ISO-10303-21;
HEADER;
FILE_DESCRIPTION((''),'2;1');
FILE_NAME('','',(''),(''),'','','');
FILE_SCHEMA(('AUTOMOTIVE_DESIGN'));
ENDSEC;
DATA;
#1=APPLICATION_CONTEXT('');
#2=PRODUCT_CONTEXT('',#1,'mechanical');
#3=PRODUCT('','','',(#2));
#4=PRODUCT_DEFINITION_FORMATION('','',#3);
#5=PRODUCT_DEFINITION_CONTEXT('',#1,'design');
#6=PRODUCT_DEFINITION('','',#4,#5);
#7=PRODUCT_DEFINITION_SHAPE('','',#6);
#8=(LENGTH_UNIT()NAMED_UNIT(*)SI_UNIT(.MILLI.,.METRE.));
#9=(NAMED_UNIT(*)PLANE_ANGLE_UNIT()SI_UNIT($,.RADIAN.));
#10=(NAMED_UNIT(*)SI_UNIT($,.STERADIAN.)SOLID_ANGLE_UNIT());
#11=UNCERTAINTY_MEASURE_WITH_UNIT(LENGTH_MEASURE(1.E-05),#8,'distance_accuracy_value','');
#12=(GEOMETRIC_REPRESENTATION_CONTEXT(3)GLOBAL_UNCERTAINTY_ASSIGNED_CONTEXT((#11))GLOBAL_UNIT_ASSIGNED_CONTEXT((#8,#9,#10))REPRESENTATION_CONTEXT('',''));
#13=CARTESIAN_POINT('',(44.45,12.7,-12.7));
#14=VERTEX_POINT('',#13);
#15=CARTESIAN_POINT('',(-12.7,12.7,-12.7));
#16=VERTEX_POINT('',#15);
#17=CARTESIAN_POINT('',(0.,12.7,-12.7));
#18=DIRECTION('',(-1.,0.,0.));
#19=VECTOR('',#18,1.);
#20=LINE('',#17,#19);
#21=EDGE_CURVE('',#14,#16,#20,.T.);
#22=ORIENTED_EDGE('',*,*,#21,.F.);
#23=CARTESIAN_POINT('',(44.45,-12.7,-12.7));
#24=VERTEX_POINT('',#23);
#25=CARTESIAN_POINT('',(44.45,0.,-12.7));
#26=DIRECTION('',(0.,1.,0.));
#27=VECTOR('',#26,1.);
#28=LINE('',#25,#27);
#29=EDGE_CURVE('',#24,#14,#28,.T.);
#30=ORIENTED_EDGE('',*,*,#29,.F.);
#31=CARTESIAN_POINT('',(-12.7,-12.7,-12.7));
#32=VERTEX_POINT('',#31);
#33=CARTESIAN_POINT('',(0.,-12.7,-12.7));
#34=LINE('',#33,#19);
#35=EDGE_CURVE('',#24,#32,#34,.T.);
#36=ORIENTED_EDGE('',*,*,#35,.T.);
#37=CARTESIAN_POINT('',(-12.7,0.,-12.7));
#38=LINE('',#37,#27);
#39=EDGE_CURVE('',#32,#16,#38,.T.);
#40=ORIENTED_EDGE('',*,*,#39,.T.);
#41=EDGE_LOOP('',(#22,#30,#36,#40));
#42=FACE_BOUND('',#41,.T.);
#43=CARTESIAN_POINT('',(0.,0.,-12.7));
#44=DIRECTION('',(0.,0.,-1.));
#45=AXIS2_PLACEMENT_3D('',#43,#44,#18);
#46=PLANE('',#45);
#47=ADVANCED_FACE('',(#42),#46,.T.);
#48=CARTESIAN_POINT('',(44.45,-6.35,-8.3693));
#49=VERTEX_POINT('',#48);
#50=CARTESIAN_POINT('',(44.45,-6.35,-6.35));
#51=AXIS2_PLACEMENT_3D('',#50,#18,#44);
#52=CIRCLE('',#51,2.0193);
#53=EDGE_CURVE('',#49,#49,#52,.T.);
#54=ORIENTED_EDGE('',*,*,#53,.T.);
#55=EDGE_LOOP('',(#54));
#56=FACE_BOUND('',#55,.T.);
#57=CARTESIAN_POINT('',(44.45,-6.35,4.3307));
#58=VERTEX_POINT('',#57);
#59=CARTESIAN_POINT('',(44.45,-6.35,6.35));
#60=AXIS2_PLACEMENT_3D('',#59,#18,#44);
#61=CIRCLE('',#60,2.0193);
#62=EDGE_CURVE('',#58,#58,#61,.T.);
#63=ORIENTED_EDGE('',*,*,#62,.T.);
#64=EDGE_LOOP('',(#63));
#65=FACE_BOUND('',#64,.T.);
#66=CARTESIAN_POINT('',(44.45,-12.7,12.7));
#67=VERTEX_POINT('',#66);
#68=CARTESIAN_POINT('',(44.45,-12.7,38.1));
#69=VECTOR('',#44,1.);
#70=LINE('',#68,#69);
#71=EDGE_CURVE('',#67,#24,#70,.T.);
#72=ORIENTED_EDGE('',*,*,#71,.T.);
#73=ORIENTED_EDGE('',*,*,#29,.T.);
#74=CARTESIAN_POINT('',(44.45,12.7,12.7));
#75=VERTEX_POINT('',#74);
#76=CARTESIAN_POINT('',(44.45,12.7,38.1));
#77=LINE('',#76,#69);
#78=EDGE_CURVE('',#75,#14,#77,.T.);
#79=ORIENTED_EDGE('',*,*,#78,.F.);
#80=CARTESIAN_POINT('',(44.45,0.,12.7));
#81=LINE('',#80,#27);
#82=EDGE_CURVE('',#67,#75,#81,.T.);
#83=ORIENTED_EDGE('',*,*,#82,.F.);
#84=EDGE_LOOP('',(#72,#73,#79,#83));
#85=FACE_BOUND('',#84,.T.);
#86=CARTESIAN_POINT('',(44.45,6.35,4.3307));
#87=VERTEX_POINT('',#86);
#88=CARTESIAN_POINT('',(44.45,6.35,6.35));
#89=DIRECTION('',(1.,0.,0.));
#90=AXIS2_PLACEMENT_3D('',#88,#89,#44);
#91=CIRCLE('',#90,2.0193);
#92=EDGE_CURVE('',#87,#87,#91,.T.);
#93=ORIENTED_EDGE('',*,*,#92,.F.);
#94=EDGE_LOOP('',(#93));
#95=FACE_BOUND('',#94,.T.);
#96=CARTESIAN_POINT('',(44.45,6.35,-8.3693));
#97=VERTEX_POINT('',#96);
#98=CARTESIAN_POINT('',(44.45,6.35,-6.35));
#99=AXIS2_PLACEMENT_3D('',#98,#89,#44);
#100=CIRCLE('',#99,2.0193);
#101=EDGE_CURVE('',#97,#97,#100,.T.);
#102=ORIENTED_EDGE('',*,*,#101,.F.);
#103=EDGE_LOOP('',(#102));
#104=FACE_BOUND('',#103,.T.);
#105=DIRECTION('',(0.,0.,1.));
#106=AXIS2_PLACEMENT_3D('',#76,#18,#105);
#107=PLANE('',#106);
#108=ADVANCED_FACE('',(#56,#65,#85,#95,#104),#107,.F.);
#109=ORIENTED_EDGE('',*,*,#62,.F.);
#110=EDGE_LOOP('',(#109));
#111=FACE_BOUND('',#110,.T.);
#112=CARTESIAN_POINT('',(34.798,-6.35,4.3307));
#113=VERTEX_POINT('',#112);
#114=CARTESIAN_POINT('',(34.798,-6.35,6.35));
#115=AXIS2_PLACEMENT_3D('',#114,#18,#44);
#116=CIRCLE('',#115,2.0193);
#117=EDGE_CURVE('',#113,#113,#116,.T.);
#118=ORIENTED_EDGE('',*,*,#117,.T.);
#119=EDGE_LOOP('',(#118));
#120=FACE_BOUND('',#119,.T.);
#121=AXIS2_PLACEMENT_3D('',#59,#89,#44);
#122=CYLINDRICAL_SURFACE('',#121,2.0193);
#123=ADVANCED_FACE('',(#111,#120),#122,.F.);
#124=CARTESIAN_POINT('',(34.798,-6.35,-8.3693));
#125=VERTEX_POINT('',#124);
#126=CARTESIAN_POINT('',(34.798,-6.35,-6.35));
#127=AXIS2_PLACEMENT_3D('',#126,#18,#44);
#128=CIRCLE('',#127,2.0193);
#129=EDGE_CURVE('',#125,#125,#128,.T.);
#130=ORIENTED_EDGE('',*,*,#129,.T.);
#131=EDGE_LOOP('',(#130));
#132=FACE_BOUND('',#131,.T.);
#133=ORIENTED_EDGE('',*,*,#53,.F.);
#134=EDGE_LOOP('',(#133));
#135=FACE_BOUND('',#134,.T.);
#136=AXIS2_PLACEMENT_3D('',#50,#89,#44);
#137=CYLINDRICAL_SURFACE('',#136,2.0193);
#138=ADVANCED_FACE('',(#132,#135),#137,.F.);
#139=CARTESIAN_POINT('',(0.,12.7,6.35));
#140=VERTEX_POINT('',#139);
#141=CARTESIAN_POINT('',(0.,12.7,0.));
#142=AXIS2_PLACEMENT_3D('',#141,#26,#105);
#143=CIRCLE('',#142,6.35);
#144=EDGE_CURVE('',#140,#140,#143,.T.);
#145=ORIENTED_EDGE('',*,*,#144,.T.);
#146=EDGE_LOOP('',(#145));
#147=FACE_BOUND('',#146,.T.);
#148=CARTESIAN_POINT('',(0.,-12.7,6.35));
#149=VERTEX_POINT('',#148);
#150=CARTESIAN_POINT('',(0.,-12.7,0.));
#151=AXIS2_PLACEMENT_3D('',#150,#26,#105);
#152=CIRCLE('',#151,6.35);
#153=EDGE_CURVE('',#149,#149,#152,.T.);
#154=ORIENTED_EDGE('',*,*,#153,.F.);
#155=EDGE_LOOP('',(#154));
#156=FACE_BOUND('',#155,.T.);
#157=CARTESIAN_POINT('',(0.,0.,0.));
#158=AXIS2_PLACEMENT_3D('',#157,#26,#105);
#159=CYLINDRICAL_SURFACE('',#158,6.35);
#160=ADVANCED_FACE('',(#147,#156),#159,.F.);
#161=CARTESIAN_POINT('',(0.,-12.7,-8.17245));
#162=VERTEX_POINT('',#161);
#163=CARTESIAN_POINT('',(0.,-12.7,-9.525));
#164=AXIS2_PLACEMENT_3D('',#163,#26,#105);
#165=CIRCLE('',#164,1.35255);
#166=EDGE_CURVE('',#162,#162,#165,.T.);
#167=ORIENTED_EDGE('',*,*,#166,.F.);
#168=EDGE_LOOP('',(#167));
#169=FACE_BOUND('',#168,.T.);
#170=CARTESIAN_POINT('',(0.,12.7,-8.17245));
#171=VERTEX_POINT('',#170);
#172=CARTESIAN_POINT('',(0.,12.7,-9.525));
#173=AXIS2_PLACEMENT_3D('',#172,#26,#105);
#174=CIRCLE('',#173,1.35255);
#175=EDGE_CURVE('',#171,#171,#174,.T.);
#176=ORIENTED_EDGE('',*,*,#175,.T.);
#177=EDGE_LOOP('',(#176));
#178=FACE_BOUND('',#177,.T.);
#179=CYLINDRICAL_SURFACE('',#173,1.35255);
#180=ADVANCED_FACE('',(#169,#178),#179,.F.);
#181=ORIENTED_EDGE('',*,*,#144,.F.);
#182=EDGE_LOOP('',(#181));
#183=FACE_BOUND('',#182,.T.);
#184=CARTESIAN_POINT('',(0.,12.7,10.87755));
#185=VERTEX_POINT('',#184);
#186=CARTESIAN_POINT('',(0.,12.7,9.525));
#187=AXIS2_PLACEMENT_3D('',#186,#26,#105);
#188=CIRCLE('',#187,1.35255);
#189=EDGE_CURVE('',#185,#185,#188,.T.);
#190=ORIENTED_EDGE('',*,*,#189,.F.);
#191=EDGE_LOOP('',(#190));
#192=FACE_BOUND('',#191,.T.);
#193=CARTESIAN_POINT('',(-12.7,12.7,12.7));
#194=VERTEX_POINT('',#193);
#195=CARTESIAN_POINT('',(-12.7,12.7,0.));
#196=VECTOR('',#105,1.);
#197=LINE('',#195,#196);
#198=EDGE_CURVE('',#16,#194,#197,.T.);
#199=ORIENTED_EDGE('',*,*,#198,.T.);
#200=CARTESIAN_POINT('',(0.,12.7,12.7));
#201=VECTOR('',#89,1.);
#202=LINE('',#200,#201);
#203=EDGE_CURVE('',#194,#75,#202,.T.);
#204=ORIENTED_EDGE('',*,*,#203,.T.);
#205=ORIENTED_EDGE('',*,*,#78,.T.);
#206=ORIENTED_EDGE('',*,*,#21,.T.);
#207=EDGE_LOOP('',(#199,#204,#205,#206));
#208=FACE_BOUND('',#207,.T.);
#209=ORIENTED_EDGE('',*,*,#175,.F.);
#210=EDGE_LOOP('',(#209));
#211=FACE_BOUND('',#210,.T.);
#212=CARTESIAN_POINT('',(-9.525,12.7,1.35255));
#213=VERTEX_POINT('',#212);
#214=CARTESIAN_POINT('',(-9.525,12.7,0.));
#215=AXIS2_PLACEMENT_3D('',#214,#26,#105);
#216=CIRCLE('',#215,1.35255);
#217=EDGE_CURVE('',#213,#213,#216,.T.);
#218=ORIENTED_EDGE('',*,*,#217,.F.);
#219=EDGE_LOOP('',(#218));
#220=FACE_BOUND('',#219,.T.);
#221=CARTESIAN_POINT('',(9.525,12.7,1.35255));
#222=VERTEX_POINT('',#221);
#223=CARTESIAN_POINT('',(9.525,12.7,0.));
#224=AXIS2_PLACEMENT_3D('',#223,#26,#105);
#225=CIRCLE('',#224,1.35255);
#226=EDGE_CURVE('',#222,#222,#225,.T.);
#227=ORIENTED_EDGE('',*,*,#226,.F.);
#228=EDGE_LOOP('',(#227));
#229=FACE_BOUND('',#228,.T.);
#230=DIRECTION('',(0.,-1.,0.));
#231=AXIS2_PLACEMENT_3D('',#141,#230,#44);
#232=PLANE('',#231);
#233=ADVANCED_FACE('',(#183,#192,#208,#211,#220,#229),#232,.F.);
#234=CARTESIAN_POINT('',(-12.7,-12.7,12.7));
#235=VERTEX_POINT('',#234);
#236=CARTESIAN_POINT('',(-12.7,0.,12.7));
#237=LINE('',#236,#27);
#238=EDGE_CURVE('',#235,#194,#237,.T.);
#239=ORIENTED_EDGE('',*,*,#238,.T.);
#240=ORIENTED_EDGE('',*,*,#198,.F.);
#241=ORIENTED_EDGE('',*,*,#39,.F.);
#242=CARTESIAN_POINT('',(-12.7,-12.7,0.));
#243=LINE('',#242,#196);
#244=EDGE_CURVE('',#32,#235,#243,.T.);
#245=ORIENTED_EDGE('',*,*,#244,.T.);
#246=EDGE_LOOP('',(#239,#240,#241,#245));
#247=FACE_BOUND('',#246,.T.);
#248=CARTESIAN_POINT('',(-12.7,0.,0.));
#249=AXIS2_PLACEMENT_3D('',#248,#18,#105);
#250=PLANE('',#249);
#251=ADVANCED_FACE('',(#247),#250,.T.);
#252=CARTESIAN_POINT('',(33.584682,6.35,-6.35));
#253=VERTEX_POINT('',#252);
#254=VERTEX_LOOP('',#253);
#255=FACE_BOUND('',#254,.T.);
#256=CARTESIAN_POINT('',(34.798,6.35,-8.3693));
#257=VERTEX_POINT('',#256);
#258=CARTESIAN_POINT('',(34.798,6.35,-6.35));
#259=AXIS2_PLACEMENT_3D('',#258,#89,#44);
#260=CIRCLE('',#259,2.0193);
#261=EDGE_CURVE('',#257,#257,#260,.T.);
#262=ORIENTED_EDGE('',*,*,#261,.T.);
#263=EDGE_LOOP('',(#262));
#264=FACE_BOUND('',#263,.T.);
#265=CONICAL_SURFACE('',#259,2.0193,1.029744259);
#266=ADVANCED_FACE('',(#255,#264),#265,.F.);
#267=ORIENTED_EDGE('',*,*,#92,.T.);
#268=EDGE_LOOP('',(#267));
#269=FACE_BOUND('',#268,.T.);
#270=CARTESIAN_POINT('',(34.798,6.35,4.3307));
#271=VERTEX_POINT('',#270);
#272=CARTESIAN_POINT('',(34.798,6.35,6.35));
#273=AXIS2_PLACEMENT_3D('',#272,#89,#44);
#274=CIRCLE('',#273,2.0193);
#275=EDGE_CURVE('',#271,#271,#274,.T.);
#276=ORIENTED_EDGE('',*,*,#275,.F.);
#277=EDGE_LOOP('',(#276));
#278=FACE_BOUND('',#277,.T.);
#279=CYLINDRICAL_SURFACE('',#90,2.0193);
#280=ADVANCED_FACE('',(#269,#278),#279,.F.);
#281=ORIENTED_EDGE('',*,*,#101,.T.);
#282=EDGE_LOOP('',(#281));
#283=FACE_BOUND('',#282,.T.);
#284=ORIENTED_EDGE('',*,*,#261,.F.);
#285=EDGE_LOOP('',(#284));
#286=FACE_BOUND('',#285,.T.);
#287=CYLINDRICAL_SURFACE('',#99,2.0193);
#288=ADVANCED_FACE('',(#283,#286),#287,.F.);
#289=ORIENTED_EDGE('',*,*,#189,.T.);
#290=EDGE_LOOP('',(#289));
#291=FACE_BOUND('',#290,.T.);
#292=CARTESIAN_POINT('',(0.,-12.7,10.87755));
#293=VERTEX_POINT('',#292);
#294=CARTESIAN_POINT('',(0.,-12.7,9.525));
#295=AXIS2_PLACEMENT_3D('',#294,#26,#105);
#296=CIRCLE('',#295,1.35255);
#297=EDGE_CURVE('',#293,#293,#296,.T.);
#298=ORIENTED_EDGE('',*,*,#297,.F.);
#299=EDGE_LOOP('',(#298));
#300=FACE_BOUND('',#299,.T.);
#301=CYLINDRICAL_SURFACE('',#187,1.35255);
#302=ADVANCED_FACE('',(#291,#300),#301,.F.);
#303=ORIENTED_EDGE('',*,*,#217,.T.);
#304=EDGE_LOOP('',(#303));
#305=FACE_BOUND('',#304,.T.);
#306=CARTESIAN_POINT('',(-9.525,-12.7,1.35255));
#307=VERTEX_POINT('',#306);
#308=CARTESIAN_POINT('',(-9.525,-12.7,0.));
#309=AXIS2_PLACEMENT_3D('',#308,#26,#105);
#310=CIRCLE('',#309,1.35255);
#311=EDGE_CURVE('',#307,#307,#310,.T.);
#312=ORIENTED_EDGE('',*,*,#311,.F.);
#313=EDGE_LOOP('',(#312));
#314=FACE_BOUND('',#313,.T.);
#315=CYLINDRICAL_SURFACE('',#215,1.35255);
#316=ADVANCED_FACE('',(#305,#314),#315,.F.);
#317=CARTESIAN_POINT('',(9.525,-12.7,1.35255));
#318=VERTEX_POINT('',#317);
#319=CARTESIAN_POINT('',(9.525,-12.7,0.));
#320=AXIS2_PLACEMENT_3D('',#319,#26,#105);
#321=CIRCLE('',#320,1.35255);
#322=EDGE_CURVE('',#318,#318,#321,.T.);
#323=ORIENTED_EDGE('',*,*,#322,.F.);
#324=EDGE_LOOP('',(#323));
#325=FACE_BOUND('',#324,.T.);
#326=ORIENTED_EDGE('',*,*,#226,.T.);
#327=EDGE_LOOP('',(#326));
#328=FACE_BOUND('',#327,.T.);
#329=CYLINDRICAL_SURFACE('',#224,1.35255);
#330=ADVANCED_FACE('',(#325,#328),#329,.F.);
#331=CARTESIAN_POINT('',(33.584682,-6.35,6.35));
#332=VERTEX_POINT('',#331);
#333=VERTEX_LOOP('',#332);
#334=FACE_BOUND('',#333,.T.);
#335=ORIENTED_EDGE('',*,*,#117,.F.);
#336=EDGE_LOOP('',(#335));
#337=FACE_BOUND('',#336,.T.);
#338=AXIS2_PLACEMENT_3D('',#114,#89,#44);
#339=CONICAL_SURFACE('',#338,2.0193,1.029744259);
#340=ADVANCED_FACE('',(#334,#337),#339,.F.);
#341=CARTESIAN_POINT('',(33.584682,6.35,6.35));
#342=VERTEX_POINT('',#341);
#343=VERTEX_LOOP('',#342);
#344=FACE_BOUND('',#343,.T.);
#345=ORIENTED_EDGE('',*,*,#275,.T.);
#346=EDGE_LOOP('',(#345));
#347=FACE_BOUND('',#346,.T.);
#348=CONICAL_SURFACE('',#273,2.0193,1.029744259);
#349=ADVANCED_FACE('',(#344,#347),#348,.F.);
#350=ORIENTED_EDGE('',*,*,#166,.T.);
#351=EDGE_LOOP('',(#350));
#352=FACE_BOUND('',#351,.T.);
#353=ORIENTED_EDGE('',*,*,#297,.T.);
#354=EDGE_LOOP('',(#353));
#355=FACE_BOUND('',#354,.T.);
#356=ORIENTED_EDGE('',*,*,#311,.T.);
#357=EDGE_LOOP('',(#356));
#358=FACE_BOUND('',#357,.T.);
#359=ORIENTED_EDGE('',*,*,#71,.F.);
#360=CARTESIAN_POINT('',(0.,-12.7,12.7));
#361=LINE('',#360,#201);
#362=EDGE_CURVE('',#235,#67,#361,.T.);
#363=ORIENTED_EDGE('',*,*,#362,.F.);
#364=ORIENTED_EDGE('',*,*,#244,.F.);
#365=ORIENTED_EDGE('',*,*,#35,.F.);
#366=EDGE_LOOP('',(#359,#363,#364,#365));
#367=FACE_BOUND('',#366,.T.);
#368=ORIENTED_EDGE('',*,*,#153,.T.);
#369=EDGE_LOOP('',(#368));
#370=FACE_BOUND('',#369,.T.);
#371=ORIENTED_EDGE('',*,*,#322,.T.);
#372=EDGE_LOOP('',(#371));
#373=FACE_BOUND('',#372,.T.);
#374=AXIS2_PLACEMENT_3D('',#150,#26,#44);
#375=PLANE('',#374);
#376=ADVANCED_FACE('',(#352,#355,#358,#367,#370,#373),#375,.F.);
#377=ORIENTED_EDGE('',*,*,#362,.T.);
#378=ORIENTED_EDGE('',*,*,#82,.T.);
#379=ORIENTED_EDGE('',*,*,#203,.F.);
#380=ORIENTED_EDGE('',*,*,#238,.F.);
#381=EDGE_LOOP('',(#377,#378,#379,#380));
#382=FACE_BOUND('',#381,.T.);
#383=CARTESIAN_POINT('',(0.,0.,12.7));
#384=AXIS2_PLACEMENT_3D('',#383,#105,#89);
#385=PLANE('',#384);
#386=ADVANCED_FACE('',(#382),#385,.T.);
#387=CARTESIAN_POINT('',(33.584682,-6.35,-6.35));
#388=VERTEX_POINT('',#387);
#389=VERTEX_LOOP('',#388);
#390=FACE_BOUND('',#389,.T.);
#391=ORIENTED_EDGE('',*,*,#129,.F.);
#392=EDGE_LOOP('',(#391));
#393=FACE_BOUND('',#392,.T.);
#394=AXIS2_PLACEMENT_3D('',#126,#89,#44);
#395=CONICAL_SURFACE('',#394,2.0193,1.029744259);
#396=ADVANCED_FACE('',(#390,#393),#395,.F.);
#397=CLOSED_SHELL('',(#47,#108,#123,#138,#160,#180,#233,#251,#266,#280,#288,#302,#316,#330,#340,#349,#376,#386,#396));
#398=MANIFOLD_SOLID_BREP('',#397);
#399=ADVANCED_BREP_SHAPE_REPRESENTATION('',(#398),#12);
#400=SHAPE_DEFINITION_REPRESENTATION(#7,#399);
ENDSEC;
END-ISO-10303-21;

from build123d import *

# Parameters (mm, degrees)
SKETCH1_W                  = 88.9
SKETCH1_H                  = 76.2
BOSS_EXTRUDE1_DEPTH        = 12.7
SKETCH9_R                  = 6.35
CUT_EXTRUDE2_DEPTH         = 60.905780189
FILLET1_R                  = 38.1
F_10_32_TAPPED_HOLE1_D     = 4.0386
F_10_32_TAPPED_HOLE1_DEPTH = 9.652
F_10_32_TAPPED_HOLE1_TIP   = 1.213317848
CUT_EXTRUDE3_DEPTH         = 60.905780189
F_6_32_TAPPED_HOLE1_D      = 2.7051
CIRPATTERN1_COUNT          = 4


with BuildPart() as part:
    # Sketch1 → Boss-Extrude1 (new body)
    with BuildSketch(Plane(origin=(0, 0, 0), x_dir=(1, 0, 0), z_dir=(0, 1, 0))):
        Rectangle(SKETCH1_W, SKETCH1_H)
    extrude(amount=BOSS_EXTRUDE1_DEPTH)

    # Sketch9 → Cut-Extrude2 (cut, through all)
    with BuildSketch(Plane(origin=(0, 12.7, 0), x_dir=(1, 0, 0), z_dir=(0, 1, 0))):
        with Locations(Location((0, 0, 0), (0, 0, 270))):
            Circle(SKETCH9_R)
    extrude(amount=-CUT_EXTRUDE2_DEPTH, mode=Mode.SUBTRACT)

    # Fillet1
    fillet1_edges = [part.edges().sort_by_distance(p)[0] for p in [
        (-44.45, 6.35, -38.1),
        (-44.45, 6.35, 38.1),
    ]]
    fillet(fillet1_edges, radius=FILLET1_R - 0.0001)  # a hair under: the kernel refuses the full size

    # #10-32 Tapped Hole1
    with Locations(Plane(origin=(44.45, 0, 0), x_dir=(0, 0, -1), z_dir=(1, 0, 0))):
        with Locations((-6.35, 6.35), (6.35, 6.35)):
            Hole(F_10_32_TAPPED_HOLE1_D / 2, depth=F_10_32_TAPPED_HOLE1_DEPTH)
            with Locations((0, 0, -(F_10_32_TAPPED_HOLE1_DEPTH + F_10_32_TAPPED_HOLE1_TIP / 2))):  # 118° drill point
                Cone(0, F_10_32_TAPPED_HOLE1_D / 2, F_10_32_TAPPED_HOLE1_TIP, mode=Mode.SUBTRACT)

    # Sketch13 → Cut-Extrude3 (cut, through all)
    with BuildSketch(Plane(origin=(0, 12.7, 0), x_dir=(1, 0, 0), z_dir=(0, 1, 0))):
        with BuildLine():
            Line((-12.7, 12.7), (44.45, 12.7))
            Line((44.45, 12.7), (44.45, 38.1))
            Line((44.45, 38.1), (-6.35, 38.1))
            ThreePointArc((-6.35, 38.1), (-33.290768363, 26.940768363), (-44.45, 0))
            ThreePointArc((-44.45, 0), (-33.290768363, -26.940768363), (-6.35, -38.1))
            Line((-6.35, -38.1), (44.45, -38.1))
            Line((44.45, -38.1), (44.45, -12.7))
            Line((44.45, -12.7), (-12.7, -12.7))
            Line((-12.7, -12.7), (-12.7, 12.7))
        make_face()
    extrude(amount=-CUT_EXTRUDE3_DEPTH, mode=Mode.SUBTRACT)


with BuildPart() as cut_extrude3_kept_piece:
    # of the separate pieces the step leaves, the one the design keeps (cut_extrude3_pieces_kept)
    add(part.part.solids().sort_by_distance((44.45, 12.7, 12.7))[0])

    # Mirror2: Cut-Extrude3 kept piece across plane


with BuildPart() as cut_extrude3_kept_piece_1:
    add(cut_extrude3_kept_piece.part)
    add(cut_extrude3_kept_piece.part.mirror(Plane(origin=(0, 0, 0), x_dir=(0, 0, 1), z_dir=(0, -1, 0))))

    # #6-32 Tapped Hole1 (through all)
    with Locations(Plane(origin=(0, 12.7, 0), x_dir=(1, 0, 0), z_dir=(0, 1, 0))):
        with Locations((-9.525, 0)):
            f_6_32_tapped_hole1 = Hole(F_6_32_TAPPED_HOLE1_D / 2)

    # CirPattern1: #6-32 Tapped Hole1 ×4 about axis
    cirpattern1_axis = Axis((0, 0, 0), (0, 1, 0))
    for i in range(1, CIRPATTERN1_COUNT):
        add(f_6_32_tapped_hole1.rotate(cirpattern1_axis, i * 360 / CIRPATTERN1_COUNT), mode=Mode.SUBTRACT)


solid = cut_extrude3_kept_piece_1.part
